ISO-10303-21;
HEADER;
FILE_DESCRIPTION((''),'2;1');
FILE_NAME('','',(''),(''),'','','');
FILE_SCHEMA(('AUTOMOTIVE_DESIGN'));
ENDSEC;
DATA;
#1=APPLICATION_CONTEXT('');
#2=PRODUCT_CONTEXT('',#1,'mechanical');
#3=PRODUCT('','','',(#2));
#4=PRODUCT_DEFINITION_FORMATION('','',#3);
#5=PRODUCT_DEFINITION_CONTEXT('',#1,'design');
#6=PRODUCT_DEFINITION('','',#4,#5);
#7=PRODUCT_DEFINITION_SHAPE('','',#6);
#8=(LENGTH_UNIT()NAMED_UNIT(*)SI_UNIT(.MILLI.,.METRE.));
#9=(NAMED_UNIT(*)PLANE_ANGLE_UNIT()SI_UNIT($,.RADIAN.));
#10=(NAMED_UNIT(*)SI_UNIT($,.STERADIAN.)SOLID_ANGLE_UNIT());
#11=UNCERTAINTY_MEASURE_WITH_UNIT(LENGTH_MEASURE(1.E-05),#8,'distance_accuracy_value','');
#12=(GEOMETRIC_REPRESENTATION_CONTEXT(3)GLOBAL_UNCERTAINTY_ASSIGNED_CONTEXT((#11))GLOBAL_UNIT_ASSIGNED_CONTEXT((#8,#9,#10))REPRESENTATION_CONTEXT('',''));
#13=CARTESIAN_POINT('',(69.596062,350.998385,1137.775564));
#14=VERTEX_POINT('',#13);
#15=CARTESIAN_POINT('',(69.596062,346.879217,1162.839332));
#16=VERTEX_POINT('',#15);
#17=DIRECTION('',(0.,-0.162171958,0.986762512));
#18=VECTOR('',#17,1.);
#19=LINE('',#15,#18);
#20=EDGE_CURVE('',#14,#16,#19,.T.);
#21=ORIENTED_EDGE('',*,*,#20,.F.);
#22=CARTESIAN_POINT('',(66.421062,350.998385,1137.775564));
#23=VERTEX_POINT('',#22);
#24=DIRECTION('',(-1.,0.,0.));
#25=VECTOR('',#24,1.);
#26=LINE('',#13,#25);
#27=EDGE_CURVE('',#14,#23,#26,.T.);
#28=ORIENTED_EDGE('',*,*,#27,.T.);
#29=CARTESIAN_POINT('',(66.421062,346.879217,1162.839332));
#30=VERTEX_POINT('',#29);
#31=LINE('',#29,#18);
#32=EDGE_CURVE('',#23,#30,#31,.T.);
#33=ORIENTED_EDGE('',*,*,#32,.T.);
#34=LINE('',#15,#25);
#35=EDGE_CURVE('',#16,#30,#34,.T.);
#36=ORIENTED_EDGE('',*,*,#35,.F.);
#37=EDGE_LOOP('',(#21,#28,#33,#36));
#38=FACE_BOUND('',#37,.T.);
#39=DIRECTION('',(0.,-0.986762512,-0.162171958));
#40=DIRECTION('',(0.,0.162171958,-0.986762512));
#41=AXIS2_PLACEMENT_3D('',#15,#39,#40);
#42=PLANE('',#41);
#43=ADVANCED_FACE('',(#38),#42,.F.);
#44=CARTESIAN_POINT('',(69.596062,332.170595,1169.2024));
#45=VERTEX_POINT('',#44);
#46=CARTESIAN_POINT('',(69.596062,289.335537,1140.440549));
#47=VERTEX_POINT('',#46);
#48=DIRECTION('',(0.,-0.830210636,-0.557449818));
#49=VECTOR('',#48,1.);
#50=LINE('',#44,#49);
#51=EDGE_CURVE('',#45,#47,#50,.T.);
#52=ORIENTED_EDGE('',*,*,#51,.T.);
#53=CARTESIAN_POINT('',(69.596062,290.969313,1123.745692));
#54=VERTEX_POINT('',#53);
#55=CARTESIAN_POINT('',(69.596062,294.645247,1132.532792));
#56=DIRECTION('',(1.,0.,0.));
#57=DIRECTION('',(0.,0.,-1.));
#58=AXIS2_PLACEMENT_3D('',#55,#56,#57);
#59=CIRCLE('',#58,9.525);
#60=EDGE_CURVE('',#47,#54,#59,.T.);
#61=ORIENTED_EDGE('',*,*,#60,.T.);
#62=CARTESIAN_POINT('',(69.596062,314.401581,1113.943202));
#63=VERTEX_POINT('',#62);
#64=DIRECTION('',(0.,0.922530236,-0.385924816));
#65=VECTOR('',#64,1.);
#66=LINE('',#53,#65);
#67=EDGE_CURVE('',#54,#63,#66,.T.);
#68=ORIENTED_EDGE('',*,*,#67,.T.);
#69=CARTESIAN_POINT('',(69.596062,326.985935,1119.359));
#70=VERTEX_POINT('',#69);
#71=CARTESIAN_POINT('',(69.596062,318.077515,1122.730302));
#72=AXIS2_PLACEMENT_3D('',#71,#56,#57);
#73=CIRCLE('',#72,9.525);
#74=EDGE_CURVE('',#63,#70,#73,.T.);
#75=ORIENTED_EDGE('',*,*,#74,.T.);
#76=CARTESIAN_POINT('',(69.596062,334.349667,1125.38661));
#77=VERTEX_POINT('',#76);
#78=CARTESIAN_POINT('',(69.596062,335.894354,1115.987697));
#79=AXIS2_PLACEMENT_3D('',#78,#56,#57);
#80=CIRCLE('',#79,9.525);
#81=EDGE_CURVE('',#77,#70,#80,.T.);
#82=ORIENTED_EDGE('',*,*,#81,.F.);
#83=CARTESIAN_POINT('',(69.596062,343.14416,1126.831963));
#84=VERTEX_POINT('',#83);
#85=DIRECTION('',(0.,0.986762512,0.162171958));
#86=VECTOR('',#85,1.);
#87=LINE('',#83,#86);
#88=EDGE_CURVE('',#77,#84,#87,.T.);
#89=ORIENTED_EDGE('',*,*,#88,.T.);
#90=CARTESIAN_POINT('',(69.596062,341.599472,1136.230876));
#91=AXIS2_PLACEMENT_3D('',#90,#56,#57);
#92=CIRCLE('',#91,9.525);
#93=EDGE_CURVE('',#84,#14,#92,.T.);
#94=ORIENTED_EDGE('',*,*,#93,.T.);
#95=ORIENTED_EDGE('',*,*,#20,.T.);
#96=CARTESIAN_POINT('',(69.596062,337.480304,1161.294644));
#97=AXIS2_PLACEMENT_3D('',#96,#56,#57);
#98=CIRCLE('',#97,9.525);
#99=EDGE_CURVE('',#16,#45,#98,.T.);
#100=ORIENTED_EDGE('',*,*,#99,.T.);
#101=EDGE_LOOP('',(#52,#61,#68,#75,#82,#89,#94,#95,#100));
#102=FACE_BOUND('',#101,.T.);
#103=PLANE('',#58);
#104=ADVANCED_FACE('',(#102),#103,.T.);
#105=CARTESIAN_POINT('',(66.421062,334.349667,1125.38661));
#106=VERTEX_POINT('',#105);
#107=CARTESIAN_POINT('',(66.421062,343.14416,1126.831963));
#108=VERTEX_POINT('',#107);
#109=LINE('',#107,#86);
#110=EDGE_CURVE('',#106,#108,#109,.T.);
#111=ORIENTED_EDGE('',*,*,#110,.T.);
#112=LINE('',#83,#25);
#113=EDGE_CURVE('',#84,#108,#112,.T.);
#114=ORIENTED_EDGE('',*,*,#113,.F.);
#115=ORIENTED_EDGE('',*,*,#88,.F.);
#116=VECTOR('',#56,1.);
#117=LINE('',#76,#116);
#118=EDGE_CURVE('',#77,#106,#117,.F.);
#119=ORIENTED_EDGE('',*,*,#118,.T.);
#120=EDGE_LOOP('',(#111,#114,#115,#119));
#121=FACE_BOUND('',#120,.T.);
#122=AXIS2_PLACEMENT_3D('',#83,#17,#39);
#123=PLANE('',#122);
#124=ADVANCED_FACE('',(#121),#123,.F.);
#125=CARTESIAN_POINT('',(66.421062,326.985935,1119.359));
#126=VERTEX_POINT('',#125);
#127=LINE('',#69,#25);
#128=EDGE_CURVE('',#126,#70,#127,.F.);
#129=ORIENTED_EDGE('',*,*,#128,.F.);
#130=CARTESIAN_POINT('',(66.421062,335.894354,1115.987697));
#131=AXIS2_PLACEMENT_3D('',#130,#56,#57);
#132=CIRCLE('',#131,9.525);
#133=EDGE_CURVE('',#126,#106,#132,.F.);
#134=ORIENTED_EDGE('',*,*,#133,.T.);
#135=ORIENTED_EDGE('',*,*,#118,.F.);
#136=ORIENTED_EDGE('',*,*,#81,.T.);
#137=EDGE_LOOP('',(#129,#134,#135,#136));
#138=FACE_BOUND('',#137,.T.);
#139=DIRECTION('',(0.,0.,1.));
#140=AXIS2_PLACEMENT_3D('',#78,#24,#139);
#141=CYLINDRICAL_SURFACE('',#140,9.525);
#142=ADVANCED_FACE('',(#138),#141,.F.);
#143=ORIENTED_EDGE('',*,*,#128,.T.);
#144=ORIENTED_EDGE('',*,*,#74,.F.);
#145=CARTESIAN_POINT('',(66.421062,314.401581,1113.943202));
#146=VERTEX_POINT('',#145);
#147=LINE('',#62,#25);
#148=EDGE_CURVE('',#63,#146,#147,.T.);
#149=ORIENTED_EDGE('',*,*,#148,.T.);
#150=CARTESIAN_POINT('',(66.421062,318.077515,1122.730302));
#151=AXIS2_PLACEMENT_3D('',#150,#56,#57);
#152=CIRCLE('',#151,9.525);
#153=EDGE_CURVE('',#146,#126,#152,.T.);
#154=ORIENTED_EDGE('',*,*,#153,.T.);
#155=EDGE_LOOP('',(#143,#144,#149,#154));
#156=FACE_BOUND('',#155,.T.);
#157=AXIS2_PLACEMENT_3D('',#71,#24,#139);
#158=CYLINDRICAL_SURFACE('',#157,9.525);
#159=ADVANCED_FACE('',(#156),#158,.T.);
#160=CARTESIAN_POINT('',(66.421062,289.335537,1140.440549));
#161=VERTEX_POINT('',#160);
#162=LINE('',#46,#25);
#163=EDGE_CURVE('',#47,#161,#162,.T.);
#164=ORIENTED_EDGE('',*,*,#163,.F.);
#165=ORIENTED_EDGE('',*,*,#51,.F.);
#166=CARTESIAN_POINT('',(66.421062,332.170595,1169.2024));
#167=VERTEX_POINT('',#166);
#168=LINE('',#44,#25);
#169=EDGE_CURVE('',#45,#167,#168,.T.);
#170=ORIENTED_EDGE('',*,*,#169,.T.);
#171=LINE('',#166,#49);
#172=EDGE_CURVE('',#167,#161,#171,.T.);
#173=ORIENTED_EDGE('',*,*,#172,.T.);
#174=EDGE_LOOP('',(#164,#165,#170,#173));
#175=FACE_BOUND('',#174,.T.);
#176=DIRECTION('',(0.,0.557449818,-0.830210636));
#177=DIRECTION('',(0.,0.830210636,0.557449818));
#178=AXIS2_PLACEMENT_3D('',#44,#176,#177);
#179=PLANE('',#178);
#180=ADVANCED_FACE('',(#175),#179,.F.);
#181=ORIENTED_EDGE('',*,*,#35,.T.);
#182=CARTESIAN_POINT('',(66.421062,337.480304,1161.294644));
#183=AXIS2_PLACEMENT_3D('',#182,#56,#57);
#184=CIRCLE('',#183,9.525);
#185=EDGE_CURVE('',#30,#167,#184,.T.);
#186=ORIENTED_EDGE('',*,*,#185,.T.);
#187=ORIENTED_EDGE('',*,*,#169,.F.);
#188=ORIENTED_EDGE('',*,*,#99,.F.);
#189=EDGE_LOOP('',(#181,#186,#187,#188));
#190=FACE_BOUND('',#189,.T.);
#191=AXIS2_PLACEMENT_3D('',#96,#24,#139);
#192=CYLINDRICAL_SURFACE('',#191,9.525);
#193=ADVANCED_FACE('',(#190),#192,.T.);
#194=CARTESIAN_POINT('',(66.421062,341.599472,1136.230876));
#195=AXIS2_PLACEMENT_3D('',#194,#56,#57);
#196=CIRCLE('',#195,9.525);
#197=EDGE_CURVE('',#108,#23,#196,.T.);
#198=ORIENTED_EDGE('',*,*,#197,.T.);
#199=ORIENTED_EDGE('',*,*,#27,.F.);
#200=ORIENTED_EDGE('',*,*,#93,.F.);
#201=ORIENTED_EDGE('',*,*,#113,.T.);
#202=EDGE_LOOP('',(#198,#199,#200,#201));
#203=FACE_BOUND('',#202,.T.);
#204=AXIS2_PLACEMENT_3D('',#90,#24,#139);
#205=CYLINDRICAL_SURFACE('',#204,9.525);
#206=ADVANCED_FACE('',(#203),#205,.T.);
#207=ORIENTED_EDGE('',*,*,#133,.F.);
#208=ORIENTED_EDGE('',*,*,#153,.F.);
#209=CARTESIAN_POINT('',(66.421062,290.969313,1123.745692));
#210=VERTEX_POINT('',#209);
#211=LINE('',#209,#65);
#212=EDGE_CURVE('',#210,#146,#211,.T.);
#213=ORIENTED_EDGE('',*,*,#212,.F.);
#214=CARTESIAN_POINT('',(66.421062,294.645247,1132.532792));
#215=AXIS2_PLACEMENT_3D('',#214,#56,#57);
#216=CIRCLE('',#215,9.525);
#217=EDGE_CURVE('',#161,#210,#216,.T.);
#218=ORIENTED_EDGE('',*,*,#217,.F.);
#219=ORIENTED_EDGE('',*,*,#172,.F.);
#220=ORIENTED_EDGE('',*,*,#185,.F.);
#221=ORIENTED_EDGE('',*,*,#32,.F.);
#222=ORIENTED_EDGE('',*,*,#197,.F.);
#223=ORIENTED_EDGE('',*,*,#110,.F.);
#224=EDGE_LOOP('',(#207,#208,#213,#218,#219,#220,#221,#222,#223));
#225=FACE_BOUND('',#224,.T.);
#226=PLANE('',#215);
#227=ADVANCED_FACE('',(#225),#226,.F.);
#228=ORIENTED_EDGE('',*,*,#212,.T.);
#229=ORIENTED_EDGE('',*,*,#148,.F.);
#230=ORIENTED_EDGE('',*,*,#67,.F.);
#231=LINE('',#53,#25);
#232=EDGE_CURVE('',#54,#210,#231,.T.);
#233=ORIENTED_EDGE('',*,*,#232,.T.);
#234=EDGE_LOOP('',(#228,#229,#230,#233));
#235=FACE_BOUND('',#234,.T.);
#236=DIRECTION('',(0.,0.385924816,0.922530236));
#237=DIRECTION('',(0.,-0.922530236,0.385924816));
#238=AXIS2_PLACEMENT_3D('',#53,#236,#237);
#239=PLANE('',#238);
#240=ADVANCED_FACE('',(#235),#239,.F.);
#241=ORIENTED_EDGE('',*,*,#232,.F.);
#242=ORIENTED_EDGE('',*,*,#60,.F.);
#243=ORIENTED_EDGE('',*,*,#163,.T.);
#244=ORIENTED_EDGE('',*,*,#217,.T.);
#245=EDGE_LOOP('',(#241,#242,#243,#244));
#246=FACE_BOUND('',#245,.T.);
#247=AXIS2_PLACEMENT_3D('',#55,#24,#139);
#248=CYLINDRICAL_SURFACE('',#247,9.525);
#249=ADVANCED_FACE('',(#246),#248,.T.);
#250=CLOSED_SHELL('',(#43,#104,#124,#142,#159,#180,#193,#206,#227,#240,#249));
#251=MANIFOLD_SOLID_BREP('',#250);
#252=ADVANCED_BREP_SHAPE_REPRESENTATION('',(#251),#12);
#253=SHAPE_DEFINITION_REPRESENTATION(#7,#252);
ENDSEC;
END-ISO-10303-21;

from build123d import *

# Parameters (mm, degrees)
BOSS_EXTRUDE1_START = 66.421062
BOSS_EXTRUDE1_DEPTH = 3.175
FILLET1_R           = 9.525


with BuildPart() as part:
    # Sketch1 → Boss-Extrude1 (new body)
    with BuildSketch(Plane(origin=(0, 0, 0), x_dir=(0, 0, -1), z_dir=(1, 0, 0)).offset(BOSS_EXTRUDE1_START)):
        with BuildLine():
            Line((-1123.745691864, 290.969312893), (-1113.943201538, 314.401580889))
            ThreePointArc((-1113.943201538, 314.401580889), (-1115.256946713, 323.982985548), (-1124.274989939, 327.476427692))
            Line((-1124.274989939, 327.476427692), (-1124.257483159, 327.479304887))
            Line((-1124.257483159, 327.479304887), (-1126.831962996, 343.144159772))
            ThreePointArc((-1126.831962996, 343.144159772), (-1130.677100149, 349.33776623), (-1137.77556383, 350.998384801))
            Line((-1137.77556383, 350.998384801), (-1162.839331646, 346.879217061))
            ThreePointArc((-1162.839331646, 346.879217061), (-1170.036672625, 341.262176157), (-1169.202400053, 332.170594614))
            Line((-1169.202400053, 332.170594614), (-1140.440548672, 289.335537249))
            ThreePointArc((-1140.440548672, 289.335537249), (-1131.605097766, 285.165531172), (-1123.745691864, 290.969312893))
        make_face()
    extrude(amount=BOSS_EXTRUDE1_DEPTH)

    # Fillet1
    # the kernel refuses this fillet: 9.525 mm, written as the material it adds along each edge
    with BuildSketch(Plane(origin=(66.421062, 327.476427692, 1124.274989939), x_dir=(0, -0.5830735725589627, -0.8124193553721674), z_dir=(1, 0, 0))) as fillet1_piece_1_section:
        with BuildLine():
            CenterArc((20.205576272, 6.735192091), FILLET1_R, 135, 90)
            Line((13.470384182, 13.470384182), (0, 0))
            ThreePointArc((0, 0), (6.735192091, 2.789807909), (13.470384182, 0))
        make_face()
    fillet1_piece_1 = extrude(amount=3.175, mode=Mode.PRIVATE)
    fillet1_piece_1 = split(fillet1_piece_1, bisect_by=Plane(origin=(68.008562, 327.479299996, 1124.257482355), z_dir=(0, -0.1621719582624188, 0.9867625124381917)), keep=Keep.TOP, mode=Mode.PRIVATE)
    add(fillet1_piece_1)
    # the kernel refuses this fillet: 9.525 mm, written as the material it adds along each edge
    with BuildSketch(Plane(origin=(69.596062, 327.479288583, 1124.257480479), x_dir=(0, 0.9867625124381958, 0.162171958262393), z_dir=(-1, 0, 0))) as fillet1_2_piece_1:
        with BuildLine():
            CenterArc((6.9625446, 9.525), FILLET1_R, 210.061634747, 59.938365253)
            ThreePointArc((-1.281219438, 4.753629183), (-0.328171819, 2.461024254), (0, 0))
            Line((0, 0), (6.9625446, 0))
        make_face()
    extrude(amount=3.175)


solid = part.part
